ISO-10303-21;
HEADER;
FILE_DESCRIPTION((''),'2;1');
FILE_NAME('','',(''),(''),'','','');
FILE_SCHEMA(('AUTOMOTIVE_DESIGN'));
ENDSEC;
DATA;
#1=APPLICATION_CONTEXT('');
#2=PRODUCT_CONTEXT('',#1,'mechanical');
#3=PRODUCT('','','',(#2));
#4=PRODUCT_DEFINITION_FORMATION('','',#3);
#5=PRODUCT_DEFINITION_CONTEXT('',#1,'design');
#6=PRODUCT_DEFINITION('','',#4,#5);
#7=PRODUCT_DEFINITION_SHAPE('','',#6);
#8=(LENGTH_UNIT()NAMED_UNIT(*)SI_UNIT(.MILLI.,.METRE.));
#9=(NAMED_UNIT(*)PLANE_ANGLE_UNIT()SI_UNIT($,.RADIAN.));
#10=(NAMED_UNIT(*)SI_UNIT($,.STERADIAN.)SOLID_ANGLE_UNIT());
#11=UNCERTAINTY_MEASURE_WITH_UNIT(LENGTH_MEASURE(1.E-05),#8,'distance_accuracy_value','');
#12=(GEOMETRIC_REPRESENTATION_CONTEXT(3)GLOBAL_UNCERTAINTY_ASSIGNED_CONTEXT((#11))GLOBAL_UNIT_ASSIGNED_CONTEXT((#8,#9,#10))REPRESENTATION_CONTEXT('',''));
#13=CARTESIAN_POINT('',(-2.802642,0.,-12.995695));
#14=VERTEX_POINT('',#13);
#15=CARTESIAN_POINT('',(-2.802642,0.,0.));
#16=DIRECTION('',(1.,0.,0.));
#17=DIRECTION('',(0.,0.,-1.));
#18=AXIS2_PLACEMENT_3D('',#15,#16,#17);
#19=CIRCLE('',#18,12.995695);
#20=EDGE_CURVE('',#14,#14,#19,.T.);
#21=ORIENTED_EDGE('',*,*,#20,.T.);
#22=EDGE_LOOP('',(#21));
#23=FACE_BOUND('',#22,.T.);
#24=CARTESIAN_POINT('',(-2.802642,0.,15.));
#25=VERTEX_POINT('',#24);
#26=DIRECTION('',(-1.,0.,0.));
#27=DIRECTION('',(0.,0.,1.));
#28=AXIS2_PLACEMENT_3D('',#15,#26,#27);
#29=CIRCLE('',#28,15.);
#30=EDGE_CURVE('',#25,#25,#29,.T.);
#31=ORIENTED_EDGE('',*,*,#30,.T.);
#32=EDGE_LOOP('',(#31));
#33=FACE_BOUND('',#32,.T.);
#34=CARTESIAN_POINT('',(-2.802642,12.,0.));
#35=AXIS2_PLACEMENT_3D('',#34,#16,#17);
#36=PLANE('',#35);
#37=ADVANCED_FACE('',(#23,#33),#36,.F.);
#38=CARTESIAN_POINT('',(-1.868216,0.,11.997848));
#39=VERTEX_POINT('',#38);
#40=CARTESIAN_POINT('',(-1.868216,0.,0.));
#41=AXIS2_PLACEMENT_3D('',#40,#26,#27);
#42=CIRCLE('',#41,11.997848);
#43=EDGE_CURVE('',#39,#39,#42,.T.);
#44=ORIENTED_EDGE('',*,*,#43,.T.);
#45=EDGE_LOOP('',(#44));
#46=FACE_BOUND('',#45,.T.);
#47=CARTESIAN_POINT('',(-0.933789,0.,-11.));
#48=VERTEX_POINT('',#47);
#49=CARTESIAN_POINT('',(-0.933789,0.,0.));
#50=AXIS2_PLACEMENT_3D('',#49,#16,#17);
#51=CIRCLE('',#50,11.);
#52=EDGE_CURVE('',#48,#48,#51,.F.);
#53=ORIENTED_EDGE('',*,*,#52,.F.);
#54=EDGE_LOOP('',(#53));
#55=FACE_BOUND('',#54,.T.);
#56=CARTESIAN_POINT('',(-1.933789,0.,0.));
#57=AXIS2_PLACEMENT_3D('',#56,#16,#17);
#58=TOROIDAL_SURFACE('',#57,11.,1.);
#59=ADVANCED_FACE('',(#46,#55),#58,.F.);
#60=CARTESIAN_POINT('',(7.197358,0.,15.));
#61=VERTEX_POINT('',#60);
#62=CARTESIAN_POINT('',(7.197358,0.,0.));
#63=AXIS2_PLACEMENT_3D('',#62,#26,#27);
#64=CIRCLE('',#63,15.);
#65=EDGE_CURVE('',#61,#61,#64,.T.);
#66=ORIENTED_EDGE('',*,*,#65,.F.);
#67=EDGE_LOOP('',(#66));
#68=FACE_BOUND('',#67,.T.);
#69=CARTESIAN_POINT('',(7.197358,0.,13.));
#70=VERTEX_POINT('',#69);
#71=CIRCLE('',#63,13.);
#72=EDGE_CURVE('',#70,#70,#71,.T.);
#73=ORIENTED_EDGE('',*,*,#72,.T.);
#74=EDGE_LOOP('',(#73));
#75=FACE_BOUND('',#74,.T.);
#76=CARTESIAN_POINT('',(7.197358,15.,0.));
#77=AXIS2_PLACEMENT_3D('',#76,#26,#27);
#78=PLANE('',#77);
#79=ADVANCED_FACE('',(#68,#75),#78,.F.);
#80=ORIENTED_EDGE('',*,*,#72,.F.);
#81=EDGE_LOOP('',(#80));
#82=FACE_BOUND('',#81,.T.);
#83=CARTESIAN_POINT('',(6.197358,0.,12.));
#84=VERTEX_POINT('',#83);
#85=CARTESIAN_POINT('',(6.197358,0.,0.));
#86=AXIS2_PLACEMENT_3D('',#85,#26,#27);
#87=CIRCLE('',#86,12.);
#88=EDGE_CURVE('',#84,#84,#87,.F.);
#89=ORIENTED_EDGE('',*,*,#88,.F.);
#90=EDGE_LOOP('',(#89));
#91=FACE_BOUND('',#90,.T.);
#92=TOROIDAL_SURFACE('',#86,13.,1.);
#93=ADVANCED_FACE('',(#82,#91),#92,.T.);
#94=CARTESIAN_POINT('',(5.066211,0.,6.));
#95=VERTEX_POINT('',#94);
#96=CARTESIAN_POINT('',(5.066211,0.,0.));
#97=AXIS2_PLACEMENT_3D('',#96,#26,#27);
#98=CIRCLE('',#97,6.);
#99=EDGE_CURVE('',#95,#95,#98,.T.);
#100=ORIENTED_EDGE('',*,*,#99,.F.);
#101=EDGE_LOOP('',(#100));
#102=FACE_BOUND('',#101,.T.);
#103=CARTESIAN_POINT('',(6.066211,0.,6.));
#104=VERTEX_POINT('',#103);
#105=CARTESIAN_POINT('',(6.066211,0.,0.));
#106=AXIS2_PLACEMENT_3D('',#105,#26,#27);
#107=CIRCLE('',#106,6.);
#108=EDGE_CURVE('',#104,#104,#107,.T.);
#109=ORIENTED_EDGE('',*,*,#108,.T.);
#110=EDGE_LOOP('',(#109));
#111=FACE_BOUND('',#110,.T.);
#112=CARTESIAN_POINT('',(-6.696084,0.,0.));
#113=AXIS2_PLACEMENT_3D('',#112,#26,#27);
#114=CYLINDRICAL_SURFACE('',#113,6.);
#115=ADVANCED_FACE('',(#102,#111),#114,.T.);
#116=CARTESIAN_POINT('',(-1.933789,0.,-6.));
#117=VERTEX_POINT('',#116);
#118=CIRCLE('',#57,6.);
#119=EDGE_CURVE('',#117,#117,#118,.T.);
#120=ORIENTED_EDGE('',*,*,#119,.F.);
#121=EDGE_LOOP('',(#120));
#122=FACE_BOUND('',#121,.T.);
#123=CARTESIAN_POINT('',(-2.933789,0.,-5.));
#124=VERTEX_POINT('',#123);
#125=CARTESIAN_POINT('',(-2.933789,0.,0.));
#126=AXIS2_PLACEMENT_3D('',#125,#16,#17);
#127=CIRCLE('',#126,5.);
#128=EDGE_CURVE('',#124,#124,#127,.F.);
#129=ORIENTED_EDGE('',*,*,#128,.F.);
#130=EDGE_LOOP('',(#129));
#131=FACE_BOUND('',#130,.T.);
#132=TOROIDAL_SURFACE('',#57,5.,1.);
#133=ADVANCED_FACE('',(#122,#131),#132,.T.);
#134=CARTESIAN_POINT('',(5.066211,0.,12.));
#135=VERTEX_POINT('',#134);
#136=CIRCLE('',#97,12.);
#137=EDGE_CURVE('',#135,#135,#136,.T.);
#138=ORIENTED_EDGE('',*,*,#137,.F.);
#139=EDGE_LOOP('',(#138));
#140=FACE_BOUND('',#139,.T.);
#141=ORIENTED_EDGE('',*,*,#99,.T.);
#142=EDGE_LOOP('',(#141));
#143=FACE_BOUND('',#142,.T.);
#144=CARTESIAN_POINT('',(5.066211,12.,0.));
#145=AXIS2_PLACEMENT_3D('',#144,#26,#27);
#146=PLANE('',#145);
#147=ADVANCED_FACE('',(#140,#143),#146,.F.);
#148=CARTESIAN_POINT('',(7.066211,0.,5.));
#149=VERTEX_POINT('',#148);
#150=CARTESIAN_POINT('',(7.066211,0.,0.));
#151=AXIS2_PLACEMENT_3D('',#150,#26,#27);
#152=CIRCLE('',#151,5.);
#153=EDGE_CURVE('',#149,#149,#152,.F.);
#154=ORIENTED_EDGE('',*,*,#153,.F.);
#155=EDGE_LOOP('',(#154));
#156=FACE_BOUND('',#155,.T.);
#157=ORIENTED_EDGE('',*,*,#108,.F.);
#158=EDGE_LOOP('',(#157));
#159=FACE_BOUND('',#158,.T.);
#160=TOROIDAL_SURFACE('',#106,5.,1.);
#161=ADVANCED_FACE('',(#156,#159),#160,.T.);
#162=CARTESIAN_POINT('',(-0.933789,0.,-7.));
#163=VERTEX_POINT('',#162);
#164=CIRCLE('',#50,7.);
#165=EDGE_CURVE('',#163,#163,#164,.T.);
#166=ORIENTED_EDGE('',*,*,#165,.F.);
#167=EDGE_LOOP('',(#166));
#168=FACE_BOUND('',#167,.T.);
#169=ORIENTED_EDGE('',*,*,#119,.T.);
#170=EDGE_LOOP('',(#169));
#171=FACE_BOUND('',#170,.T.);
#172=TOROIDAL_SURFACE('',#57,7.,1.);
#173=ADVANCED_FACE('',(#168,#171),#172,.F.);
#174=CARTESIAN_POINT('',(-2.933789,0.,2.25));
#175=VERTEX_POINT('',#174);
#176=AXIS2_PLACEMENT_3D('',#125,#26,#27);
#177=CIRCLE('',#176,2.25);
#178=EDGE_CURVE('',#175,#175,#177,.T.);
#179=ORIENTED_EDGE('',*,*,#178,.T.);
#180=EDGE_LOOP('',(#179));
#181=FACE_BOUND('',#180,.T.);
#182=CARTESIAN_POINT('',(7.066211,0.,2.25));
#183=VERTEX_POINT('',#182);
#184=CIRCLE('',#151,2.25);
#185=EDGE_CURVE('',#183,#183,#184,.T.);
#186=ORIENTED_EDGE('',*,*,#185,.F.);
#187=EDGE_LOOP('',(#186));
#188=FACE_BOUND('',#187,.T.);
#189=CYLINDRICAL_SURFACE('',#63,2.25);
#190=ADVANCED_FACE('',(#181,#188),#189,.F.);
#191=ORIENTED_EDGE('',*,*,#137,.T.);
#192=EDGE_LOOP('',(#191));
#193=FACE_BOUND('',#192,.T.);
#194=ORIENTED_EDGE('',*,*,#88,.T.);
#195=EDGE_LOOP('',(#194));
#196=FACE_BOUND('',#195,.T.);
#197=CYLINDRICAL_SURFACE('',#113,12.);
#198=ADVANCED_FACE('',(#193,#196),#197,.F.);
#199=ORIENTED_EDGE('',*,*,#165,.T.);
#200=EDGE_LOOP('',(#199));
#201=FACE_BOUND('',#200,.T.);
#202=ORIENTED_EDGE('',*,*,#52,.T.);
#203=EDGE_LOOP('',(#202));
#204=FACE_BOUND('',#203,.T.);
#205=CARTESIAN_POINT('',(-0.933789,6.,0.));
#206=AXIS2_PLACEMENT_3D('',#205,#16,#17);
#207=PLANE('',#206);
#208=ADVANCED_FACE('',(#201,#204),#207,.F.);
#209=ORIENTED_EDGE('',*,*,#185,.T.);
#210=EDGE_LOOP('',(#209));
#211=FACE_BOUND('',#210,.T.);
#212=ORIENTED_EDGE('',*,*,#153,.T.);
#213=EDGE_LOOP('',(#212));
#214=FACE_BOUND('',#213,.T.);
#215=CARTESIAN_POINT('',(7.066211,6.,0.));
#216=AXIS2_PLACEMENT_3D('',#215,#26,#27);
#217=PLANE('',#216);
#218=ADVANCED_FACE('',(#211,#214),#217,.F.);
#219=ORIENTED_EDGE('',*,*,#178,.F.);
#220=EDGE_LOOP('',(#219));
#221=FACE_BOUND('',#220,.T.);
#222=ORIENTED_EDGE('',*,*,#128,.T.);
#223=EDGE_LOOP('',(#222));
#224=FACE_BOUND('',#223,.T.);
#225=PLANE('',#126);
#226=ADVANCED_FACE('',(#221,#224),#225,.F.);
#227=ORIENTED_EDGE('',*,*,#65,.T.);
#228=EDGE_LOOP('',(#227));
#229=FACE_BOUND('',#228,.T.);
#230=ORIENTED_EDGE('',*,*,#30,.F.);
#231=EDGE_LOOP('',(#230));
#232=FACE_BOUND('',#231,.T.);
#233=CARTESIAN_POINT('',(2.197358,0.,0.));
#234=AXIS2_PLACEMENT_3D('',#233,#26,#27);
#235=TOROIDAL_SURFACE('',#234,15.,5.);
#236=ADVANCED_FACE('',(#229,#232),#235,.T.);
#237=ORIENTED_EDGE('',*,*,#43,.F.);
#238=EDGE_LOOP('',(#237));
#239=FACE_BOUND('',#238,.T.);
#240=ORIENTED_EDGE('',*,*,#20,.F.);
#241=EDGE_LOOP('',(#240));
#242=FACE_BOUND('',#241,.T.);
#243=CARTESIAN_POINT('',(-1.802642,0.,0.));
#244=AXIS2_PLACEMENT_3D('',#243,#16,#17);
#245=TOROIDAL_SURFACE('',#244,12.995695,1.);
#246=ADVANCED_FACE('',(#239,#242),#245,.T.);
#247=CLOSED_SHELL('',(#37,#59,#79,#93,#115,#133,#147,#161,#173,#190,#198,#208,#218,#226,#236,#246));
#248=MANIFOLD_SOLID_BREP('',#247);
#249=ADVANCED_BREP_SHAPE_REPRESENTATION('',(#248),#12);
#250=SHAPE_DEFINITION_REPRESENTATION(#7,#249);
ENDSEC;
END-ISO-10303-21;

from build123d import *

# Parameters (mm, degrees)
SKETCH_2_R          = 2.25
CUT_EXTRUDE_1_DEPTH = 31.043970418
FILLET_6_R          = 1
FILLET_7_R          = 1
FILLET_9_R          = 1


with BuildPart() as part:
    # 草圖1 → 旋轉2 (revolve)
    with BuildSketch(Plane.XY, mode=Mode.PRIVATE) as revolve_2_sk:
        with BuildLine():
            Line((-2.933789322, 0), (-2.933789322, 6))
            Line((-2.933789322, 6), (-0.933789322, 6))
            Line((-0.933789322, 6), (-0.933789322, 12))
            Line((-0.933789322, 12), (-2.802641781, 12))
            Line((-2.802641781, 12), (-2.802641781, 15))
            ThreePointArc((-2.802641781, 15), (2.197358219, 20), (7.197358219, 15))
            Line((7.197358219, 15), (7.197358219, 12))
            Line((7.197358219, 12), (5.066210678, 12))
            Line((5.066210678, 12), (5.066210678, 6))
            Line((5.066210678, 6), (7.066210678, 6))
            Line((7.066210678, 6), (7.066210678, 0))
            Line((7.066210678, 0), (-2.933789322, 0))
        make_face()
    revolve(revolve_2_sk.sketch.rotate(Axis((-6.696084404, 0, 0), (1, 0, 0)), 90), axis=Axis((-6.696084404, 0, 0), (1, 0, 0)))

    # 草圖2 → 除料-伸長1 (cut, through all)
    with BuildSketch(Plane.ZY.offset(2.933789322)):
        Circle(SKETCH_2_R)
    extrude(amount=-CUT_EXTRUDE_1_DEPTH, mode=Mode.SUBTRACT)

    # 圓角6
    fillet_6_edges = [part.edges().sort_by_distance(p)[0] for p in [
        (-0.933789322, 0, -6),
        (-0.933789322, 0, -12),
        (-2.933789322, 0, -6),
    ]]
    fillet(fillet_6_edges, radius=FILLET_6_R - 0.0001)  # a hair under: the kernel refuses the full size

    # 圓角7
    fillet_7_edges = [part.edges().sort_by_distance(p)[0] for p in [
        (-2.802641781, 0, -12),
    ]]
    fillet(fillet_7_edges, radius=FILLET_7_R)

    # 圓角9
    fillet_9_edges = [part.edges().sort_by_distance(p)[0] for p in [
        (7.197358219, 0, -12),
        (7.066210678, 0, -6),
    ]]
    fillet(fillet_9_edges, radius=FILLET_9_R)


solid = part.part
